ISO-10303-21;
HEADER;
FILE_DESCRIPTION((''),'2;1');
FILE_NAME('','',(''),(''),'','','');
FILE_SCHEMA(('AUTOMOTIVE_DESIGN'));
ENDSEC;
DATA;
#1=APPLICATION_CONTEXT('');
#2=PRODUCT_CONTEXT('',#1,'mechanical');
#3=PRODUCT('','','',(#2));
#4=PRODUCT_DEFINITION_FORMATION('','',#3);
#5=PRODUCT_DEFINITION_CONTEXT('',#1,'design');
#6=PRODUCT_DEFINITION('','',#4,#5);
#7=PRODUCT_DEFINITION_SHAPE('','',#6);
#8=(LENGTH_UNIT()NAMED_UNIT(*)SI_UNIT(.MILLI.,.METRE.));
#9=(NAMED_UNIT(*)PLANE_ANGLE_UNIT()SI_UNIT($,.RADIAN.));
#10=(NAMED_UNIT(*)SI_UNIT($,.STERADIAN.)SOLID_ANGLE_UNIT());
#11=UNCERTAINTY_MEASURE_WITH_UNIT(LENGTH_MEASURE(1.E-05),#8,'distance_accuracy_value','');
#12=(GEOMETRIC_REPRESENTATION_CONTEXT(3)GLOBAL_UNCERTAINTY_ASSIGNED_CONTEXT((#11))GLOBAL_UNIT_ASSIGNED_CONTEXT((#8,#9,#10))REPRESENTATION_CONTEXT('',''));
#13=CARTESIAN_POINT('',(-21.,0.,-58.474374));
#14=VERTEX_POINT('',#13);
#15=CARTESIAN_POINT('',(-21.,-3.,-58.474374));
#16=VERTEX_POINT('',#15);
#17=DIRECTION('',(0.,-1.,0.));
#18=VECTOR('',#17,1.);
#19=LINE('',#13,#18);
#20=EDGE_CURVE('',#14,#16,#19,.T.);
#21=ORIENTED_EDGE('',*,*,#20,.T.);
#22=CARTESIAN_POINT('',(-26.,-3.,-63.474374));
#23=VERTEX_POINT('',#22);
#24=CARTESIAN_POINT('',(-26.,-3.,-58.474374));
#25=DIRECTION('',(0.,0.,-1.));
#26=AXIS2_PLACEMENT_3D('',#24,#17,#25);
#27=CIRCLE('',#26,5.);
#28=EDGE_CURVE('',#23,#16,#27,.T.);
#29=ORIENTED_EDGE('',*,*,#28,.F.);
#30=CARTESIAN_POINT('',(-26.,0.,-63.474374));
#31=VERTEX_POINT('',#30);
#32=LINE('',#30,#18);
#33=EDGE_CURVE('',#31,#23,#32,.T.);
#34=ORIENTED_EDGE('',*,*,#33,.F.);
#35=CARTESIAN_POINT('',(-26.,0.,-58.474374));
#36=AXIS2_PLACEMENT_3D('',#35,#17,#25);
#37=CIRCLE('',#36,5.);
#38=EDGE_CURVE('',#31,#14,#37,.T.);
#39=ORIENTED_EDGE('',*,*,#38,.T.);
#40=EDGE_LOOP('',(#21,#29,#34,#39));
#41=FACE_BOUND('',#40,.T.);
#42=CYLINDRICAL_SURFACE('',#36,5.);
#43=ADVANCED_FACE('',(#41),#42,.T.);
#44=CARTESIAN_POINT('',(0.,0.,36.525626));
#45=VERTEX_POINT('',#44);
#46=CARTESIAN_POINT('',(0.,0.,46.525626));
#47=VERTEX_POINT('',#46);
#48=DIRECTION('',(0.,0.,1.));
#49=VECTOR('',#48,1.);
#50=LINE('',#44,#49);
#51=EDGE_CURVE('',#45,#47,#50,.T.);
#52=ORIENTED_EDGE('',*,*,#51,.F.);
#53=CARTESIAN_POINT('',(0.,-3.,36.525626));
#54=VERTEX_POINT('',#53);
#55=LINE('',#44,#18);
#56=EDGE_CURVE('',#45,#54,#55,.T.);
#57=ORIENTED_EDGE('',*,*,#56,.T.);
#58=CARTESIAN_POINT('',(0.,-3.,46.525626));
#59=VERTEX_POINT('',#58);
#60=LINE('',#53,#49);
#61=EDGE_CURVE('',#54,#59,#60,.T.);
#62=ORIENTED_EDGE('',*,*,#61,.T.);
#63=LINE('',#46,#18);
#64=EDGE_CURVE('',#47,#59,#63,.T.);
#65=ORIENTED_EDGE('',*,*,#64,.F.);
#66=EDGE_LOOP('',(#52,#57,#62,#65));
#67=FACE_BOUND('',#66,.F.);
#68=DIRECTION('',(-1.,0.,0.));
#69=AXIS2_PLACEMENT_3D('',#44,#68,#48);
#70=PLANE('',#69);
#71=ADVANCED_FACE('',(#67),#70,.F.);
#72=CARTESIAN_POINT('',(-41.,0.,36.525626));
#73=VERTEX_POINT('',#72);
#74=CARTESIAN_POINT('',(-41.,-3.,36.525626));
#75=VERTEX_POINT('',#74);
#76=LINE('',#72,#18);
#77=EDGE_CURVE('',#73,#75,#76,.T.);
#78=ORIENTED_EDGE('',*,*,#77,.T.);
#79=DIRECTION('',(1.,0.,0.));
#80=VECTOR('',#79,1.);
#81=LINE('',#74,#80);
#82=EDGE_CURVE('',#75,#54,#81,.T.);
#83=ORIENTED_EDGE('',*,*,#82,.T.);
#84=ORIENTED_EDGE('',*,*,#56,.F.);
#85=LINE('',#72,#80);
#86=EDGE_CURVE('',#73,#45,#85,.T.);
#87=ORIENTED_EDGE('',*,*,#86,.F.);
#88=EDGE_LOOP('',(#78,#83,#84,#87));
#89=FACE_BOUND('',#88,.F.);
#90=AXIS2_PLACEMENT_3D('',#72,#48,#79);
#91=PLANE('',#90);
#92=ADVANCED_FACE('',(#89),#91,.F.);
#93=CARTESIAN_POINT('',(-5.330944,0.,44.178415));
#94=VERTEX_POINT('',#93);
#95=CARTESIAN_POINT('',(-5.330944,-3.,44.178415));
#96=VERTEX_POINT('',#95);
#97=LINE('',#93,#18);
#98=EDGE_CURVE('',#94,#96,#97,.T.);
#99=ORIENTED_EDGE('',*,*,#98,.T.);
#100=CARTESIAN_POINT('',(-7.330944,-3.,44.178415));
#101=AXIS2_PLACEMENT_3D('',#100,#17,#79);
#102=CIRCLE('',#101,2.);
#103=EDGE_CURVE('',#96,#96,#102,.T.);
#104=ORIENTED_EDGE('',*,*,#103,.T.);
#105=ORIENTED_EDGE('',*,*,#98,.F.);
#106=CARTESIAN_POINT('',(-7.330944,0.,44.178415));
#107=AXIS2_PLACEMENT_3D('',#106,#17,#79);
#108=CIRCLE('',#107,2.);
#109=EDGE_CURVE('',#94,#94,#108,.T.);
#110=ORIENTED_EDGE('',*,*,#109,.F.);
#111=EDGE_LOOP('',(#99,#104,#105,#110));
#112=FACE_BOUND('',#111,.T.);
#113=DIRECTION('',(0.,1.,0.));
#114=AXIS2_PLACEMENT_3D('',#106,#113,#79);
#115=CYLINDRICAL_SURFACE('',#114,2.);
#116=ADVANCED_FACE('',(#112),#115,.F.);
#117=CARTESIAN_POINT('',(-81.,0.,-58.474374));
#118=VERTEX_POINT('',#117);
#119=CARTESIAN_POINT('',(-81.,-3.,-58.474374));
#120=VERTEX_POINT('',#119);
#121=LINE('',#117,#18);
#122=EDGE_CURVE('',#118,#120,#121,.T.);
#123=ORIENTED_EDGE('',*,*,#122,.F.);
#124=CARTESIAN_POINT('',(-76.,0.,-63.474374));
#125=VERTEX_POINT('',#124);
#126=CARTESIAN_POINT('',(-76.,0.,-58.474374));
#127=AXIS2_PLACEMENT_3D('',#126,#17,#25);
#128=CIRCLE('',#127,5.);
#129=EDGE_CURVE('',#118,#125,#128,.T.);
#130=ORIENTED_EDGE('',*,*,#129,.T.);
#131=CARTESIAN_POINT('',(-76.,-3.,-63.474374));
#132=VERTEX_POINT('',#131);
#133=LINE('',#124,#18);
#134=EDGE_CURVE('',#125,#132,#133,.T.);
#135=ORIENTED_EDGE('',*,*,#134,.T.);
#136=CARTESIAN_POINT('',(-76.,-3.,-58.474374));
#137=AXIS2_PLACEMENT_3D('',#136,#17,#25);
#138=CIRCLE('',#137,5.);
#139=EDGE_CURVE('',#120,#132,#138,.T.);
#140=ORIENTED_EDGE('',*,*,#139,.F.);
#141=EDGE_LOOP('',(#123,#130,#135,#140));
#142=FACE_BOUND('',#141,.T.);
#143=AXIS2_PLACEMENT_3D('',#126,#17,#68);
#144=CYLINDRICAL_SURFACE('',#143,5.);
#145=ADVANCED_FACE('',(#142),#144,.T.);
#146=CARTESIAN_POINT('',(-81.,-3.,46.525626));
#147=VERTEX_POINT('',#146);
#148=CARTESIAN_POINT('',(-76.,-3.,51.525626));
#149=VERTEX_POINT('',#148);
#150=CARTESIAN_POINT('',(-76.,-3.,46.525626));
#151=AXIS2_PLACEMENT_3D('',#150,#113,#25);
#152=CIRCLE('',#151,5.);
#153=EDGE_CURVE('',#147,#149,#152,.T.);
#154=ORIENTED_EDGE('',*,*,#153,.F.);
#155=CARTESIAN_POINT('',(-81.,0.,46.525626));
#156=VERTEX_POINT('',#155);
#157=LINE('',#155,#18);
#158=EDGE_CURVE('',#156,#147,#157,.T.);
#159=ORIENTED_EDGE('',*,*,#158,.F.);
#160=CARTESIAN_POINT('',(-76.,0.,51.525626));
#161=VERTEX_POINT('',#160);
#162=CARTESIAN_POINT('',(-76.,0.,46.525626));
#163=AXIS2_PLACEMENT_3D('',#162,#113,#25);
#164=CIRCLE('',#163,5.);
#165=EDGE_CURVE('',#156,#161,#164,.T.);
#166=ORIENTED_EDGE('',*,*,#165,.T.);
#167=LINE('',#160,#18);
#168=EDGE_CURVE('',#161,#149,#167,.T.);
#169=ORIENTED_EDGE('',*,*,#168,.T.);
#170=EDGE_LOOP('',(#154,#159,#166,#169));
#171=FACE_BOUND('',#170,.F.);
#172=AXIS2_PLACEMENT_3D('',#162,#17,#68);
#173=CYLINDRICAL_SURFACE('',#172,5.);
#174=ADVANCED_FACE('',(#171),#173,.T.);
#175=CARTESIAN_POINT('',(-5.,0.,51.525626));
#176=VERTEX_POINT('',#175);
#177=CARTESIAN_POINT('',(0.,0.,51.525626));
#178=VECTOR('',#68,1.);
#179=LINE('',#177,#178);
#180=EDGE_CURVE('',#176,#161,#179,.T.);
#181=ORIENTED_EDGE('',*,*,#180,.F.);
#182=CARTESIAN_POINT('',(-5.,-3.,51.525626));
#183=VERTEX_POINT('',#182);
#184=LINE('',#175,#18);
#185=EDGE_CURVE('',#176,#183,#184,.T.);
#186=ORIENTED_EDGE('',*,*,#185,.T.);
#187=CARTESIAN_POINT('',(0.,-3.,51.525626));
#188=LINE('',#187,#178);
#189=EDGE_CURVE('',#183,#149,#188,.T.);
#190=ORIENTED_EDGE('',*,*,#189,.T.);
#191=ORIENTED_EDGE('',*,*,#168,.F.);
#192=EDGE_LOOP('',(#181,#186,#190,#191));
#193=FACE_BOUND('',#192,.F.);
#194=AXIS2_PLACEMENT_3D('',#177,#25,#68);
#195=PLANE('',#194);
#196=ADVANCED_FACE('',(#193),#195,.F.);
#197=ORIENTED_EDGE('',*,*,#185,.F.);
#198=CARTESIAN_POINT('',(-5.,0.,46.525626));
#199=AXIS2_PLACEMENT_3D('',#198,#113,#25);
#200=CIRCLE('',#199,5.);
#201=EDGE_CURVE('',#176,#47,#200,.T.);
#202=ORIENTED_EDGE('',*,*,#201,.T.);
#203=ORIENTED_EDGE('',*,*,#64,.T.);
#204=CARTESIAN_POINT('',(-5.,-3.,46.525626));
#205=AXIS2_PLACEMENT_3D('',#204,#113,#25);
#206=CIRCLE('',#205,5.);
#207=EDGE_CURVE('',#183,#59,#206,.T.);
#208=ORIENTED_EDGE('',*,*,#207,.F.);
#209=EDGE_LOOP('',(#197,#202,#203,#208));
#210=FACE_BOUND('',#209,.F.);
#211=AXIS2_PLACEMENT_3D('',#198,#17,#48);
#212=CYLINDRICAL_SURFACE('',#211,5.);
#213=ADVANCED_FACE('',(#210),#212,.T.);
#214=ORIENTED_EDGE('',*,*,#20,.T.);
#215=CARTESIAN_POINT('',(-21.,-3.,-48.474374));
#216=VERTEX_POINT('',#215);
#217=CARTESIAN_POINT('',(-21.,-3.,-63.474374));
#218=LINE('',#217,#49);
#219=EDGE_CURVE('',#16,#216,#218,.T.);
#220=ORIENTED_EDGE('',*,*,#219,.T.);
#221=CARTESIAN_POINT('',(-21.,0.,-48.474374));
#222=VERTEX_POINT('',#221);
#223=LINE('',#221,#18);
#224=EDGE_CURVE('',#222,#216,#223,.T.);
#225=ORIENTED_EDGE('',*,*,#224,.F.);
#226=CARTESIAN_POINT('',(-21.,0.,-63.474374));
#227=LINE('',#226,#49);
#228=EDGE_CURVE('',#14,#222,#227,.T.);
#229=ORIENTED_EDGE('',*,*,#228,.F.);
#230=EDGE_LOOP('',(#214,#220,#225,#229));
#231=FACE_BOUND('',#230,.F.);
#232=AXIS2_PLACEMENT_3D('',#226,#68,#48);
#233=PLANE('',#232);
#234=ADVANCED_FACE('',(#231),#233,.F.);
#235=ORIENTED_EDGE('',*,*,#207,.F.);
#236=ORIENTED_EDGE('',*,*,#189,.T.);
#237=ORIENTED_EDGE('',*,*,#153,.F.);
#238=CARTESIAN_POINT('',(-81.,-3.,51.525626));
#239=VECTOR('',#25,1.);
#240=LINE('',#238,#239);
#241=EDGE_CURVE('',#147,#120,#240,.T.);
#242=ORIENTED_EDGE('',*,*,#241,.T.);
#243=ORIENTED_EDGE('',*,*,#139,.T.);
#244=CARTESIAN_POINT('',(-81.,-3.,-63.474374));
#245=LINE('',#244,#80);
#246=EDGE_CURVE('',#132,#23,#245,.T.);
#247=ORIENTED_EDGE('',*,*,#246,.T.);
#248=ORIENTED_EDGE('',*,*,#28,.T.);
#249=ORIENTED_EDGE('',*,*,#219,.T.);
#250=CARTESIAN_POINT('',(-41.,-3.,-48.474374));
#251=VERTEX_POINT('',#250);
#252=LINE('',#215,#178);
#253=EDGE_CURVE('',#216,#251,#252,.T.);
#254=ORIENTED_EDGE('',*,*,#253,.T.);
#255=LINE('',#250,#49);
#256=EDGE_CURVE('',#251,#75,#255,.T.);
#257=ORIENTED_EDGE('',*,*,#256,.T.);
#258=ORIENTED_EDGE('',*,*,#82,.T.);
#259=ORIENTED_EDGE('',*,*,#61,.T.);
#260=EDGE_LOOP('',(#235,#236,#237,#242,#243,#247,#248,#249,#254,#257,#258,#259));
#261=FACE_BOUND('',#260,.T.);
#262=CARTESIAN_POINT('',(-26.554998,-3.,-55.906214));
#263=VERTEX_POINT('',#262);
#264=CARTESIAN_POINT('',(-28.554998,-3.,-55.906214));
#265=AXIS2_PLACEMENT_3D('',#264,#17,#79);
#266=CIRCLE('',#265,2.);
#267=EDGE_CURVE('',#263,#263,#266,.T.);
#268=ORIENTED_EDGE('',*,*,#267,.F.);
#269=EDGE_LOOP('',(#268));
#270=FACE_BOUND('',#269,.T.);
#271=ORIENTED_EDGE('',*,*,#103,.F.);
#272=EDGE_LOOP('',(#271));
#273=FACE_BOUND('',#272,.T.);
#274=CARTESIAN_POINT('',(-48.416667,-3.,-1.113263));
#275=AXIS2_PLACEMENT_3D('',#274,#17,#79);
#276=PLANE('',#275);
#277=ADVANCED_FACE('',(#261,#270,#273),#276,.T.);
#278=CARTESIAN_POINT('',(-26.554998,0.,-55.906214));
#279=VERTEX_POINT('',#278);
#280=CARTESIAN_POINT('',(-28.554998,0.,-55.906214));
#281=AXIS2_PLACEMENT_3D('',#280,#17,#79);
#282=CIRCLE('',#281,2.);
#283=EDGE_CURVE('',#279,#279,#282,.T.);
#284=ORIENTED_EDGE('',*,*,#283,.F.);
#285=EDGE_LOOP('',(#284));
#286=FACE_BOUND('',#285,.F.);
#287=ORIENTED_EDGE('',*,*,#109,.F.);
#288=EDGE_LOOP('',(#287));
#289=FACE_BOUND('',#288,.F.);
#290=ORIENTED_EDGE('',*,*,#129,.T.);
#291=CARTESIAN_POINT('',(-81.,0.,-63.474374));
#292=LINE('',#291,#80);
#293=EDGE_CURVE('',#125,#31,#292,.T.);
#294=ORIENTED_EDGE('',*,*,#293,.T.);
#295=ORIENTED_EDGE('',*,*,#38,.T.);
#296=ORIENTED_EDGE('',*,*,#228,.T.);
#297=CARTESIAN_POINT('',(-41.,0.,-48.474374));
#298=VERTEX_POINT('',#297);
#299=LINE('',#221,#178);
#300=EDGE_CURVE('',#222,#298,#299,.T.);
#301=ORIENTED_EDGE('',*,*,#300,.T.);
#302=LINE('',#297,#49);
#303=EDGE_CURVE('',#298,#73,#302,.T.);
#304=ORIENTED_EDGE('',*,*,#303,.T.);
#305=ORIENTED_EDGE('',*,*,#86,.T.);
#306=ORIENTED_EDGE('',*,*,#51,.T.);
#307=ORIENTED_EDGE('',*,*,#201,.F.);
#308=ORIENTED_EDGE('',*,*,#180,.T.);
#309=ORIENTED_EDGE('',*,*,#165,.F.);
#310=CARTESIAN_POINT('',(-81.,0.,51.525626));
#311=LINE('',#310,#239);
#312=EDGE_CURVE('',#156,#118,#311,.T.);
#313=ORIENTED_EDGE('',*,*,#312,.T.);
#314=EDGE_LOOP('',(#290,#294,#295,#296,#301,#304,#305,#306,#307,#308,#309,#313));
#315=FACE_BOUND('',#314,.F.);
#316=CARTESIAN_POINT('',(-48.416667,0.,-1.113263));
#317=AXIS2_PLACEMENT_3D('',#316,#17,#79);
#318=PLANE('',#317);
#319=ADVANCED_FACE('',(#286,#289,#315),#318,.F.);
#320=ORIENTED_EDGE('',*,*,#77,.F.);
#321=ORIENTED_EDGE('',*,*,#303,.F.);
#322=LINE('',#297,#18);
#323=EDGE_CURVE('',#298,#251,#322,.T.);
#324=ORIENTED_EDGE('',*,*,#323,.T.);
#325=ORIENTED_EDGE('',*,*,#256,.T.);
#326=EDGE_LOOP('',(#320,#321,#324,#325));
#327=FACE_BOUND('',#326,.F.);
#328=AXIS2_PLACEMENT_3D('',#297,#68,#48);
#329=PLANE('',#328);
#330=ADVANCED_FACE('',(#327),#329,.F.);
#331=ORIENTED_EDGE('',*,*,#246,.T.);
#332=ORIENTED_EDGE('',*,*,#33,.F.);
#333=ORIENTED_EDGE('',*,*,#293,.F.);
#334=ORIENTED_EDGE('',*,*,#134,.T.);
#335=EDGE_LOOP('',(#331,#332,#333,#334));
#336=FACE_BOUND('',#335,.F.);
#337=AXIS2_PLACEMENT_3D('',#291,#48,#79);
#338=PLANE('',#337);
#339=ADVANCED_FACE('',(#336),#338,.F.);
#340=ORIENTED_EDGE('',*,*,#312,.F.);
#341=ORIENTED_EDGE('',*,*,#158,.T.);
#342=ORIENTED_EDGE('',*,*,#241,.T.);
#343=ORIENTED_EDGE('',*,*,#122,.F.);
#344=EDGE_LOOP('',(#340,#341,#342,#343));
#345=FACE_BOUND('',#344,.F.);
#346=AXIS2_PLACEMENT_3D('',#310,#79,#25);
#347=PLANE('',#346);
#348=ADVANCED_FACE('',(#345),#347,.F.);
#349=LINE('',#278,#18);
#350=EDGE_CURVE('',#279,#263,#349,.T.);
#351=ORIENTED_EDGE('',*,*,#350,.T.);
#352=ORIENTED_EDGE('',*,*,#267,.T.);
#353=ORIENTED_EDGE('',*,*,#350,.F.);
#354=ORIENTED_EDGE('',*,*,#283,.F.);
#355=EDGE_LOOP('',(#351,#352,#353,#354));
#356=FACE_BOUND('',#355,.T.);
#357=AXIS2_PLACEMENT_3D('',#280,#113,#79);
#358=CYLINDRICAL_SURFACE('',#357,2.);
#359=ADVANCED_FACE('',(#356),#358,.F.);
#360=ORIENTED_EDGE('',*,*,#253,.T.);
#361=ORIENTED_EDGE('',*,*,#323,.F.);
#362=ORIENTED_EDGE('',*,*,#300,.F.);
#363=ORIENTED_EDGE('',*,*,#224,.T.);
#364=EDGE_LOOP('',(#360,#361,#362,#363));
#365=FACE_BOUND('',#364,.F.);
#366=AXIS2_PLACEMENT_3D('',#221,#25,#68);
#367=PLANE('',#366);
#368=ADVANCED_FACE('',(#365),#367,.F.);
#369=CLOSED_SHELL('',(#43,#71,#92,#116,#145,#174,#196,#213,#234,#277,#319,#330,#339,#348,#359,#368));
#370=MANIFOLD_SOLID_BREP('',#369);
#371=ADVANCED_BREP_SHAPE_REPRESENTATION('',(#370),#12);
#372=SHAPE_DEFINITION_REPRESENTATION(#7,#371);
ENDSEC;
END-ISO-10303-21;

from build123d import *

# Parameters (mm, degrees)
F0_R     = 2
F1_DEPTH = 3
F2_R     = 5


# Not quite as in the source:
# - a feature names something its author has since deleted; it is built from what else it names


with BuildPart() as f1:
    # F0 (on Front) → F1 (new body)
    with BuildSketch(Plane.XZ):
        Polygon((-81, 51.5256257355), (-81, -63.4743742645), (-21, -63.4743742645), (-21, -48.4743742645), (-41, -48.4743742645), (-41, -15.9743742645), (-41, 4.0256257355), (-41, 36.5256257355), (0, 36.5256257355), (0, 51.5256257355), align=None)
        with Locations((-28.5549983382, -55.90621382)):
            Circle(F0_R, mode=Mode.SUBTRACT)
        with Locations((-7.3309438303, 44.1784150898)):
            Circle(F0_R, mode=Mode.SUBTRACT)
    extrude(amount=F1_DEPTH)

    # F2
    f2_edges = [f1.edges().sort_by_distance(p)[0] for p in [
        (-81, -1.5, 51.525626),
        (-81, -1.5, -63.474374),
        (0, -1.5, 51.525626),
        (-21, -1.5, -63.474374),
    ]]
    fillet(f2_edges, radius=F2_R)


solid = f1.part
